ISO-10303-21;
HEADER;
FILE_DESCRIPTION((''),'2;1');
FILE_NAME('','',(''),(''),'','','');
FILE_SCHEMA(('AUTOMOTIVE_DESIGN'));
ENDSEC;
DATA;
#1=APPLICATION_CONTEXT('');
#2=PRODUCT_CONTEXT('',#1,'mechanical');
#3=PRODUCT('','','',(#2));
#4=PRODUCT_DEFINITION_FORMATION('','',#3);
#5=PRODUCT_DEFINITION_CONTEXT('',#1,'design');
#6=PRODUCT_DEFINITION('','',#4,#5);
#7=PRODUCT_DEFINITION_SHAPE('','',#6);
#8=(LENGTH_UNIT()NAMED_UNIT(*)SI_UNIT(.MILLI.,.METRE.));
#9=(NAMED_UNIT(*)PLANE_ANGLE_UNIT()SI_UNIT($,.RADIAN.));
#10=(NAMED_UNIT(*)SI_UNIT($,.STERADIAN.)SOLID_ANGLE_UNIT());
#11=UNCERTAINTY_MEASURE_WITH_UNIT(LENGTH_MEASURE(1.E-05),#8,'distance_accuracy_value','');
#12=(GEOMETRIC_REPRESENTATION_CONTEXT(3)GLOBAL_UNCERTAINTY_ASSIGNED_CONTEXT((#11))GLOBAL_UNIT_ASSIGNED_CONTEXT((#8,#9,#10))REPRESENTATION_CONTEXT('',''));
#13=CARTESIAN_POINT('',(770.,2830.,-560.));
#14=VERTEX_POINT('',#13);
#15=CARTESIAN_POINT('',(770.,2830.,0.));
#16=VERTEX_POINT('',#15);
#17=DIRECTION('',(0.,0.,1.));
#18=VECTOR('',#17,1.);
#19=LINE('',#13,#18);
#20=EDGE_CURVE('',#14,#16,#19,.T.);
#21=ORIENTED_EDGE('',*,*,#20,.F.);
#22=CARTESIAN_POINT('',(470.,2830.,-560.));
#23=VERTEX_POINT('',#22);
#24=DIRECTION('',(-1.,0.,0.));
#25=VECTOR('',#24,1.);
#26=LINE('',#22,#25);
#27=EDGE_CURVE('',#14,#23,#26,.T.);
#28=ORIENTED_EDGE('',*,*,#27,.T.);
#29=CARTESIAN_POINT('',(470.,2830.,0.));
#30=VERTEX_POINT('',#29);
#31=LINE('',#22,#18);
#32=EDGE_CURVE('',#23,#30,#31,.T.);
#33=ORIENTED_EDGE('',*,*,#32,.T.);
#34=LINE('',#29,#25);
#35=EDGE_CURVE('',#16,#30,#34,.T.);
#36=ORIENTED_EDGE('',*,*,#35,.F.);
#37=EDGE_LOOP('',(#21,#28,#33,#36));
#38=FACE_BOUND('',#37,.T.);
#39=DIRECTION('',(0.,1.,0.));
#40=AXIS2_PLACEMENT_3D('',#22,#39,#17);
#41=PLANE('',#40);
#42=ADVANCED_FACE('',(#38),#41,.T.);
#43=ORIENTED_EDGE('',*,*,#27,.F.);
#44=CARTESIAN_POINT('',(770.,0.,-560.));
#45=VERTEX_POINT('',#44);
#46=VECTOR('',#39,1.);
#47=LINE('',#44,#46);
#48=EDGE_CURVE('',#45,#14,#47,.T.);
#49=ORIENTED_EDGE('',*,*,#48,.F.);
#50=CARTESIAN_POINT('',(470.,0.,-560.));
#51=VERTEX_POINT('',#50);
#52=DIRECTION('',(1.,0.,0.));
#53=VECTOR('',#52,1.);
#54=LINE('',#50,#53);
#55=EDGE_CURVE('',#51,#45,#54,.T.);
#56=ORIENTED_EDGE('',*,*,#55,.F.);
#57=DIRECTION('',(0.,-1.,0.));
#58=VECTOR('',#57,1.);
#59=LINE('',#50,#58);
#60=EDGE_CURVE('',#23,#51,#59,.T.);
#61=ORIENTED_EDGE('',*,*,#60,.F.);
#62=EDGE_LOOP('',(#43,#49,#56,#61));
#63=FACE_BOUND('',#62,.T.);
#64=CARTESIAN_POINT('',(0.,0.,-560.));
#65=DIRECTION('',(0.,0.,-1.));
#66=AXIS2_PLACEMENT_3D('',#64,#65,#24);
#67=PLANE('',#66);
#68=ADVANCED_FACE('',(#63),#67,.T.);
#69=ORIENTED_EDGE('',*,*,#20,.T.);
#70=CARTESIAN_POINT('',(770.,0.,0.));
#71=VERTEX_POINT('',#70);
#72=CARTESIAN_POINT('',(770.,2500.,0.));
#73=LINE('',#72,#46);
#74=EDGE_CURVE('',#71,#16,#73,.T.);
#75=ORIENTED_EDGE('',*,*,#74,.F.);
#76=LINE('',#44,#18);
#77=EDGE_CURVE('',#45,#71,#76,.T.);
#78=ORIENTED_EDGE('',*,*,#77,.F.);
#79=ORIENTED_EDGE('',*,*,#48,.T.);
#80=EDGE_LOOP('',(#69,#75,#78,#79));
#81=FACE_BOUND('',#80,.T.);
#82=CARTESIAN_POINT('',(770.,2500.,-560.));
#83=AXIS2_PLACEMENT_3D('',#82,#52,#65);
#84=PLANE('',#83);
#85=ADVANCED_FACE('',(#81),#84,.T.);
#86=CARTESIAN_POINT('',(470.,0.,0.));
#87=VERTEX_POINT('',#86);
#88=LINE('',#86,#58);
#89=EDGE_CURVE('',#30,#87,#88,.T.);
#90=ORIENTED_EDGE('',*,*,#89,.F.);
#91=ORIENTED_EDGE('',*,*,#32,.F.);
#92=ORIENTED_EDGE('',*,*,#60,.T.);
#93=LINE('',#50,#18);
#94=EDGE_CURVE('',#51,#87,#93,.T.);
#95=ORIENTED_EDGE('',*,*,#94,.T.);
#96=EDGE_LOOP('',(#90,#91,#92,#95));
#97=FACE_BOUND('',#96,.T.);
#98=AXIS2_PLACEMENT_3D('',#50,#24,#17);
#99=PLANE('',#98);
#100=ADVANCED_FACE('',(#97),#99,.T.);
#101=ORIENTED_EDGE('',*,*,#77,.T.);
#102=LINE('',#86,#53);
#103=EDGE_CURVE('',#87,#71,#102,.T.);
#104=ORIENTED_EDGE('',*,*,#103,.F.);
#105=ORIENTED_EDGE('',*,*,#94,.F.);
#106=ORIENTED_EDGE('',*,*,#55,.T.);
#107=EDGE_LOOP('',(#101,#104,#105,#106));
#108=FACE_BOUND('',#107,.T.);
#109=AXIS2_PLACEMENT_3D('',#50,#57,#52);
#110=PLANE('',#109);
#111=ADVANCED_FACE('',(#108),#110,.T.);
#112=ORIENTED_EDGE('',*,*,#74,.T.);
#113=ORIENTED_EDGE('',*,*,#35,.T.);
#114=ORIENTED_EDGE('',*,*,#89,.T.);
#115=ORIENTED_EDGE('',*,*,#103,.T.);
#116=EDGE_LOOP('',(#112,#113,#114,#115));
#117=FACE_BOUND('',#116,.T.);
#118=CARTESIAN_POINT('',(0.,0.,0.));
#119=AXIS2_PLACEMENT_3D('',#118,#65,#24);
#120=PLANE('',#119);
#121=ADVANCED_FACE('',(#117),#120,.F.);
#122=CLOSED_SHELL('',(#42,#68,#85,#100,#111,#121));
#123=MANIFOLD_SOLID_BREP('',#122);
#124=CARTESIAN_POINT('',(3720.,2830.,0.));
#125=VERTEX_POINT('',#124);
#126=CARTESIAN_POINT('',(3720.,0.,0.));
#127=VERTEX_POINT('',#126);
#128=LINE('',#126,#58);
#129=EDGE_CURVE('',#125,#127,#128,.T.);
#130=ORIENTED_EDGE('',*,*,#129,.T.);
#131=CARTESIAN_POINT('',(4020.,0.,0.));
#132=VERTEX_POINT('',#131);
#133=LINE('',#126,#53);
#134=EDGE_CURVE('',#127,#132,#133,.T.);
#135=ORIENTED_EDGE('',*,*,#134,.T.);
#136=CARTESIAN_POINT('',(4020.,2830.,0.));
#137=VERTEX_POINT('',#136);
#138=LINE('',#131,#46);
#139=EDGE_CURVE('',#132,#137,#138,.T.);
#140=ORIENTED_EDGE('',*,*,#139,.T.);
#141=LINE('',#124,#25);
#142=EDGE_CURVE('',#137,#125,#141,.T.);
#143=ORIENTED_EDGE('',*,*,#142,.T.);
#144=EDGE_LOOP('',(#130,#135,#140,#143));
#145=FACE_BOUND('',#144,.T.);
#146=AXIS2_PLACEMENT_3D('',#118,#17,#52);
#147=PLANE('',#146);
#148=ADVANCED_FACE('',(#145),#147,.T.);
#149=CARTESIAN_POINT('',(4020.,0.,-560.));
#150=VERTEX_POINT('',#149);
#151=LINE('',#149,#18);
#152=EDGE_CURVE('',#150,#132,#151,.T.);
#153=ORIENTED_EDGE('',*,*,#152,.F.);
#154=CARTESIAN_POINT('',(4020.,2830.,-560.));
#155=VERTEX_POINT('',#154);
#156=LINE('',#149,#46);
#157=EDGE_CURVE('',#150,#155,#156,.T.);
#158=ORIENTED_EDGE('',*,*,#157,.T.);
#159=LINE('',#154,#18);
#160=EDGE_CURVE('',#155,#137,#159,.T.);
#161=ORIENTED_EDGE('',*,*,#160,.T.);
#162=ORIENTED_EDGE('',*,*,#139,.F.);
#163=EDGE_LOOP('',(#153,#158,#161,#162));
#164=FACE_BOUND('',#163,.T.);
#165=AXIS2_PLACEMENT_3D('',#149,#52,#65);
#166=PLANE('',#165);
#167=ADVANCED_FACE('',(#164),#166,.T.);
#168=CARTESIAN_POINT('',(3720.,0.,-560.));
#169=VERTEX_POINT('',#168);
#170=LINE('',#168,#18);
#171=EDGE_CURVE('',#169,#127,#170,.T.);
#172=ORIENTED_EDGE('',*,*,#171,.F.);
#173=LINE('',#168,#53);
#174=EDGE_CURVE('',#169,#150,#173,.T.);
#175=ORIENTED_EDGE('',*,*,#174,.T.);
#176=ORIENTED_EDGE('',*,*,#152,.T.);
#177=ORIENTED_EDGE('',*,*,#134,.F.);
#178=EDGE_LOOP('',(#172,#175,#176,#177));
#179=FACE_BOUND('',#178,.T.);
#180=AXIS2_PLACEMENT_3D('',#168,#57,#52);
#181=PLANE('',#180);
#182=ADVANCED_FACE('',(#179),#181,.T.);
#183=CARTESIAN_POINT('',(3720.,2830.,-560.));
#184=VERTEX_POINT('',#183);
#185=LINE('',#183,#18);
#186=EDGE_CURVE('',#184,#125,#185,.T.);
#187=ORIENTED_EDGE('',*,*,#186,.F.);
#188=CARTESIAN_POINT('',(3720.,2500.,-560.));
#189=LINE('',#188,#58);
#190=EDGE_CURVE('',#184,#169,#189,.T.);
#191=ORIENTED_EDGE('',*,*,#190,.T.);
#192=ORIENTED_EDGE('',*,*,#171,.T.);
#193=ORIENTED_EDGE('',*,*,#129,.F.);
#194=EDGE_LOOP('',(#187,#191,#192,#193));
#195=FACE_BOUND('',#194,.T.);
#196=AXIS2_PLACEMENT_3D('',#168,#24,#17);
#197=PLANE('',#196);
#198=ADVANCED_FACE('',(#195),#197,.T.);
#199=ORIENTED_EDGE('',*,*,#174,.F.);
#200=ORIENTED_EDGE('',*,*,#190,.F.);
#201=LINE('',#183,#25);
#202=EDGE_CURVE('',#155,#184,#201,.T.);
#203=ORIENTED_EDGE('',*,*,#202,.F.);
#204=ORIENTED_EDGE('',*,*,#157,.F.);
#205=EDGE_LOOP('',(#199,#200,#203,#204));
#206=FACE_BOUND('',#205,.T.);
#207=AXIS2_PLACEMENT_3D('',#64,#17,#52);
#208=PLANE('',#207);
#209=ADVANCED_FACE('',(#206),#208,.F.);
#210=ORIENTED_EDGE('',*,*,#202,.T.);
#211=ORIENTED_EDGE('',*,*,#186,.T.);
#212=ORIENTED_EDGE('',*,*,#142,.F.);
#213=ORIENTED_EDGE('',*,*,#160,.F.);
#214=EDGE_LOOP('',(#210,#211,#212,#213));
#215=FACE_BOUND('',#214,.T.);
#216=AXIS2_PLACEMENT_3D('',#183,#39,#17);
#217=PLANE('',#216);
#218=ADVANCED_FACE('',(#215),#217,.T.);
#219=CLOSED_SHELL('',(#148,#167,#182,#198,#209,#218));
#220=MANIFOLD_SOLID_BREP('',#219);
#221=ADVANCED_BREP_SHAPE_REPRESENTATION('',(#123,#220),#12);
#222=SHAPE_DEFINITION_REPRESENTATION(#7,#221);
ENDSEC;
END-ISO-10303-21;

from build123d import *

# Parameters (mm, degrees)
SKETCH1_W                 = 4400
SKETCH1_H                 = 2900
BOSS_EXTRUDE1_DEPTH       = 9000
BOSS_EXTRUDE2_START       = -9000
BOSS_EXTRUDE2_OUTLINE_W   = 4400
BOSS_EXTRUDE2_OUTLINE_H   = 2900
BOSS_EXTRUDE2_DEPTH       = 8440
BOSS_EXTRUDE2_START_2     = -560
BOSS_EXTRUDE2_2_DEPTH     = 560
BOSS_EXTRUDE2_3_OUTLINE_W = 300
BOSS_EXTRUDE2_3_OUTLINE_H = 2830
BOSS_EXTRUDE2_3_DEPTH     = 560


with BuildPart() as part:
    # Sketch1 → Boss-Extrude1 (new body)
    with BuildSketch(Plane.XY):
        with Locations((2200, 1450)):
            Rectangle(SKETCH1_W, SKETCH1_H)
    extrude(amount=-BOSS_EXTRUDE1_DEPTH)

    # Boss-Extrude2: read off the stored shape, not the designer's step
    # Boss-Extrude2 outline → Boss-Extrude2 (cut)
    with BuildSketch(Plane.XY.offset(BOSS_EXTRUDE2_START)):
        with Locations((2200, 1450)):
            Rectangle(BOSS_EXTRUDE2_OUTLINE_W, BOSS_EXTRUDE2_OUTLINE_H)
    extrude(amount=BOSS_EXTRUDE2_DEPTH, mode=Mode.SUBTRACT)

    # Boss-Extrude2 2 outline → Boss-Extrude2 2 (cut)
    with BuildSketch(Plane.XY.offset(BOSS_EXTRUDE2_START_2)):
        Polygon((3720, 0), (3720, 2830), (4020, 2830), (4020, 0), (4400, 0), (4400, 2900), (0, 2900), (0, 0), align=None)
    extrude(amount=BOSS_EXTRUDE2_2_DEPTH, mode=Mode.SUBTRACT)


with BuildPart() as body_2:
    # Boss-Extrude2 3 outline → Boss-Extrude2 3 (new body)
    with BuildSketch(Plane.XY.offset(BOSS_EXTRUDE2_START_2)):
        with Locations((620, 1415)):
            Rectangle(BOSS_EXTRUDE2_3_OUTLINE_W, BOSS_EXTRUDE2_3_OUTLINE_H)
    extrude(amount=BOSS_EXTRUDE2_3_DEPTH)


solid = Compound([part.part, body_2.part])
